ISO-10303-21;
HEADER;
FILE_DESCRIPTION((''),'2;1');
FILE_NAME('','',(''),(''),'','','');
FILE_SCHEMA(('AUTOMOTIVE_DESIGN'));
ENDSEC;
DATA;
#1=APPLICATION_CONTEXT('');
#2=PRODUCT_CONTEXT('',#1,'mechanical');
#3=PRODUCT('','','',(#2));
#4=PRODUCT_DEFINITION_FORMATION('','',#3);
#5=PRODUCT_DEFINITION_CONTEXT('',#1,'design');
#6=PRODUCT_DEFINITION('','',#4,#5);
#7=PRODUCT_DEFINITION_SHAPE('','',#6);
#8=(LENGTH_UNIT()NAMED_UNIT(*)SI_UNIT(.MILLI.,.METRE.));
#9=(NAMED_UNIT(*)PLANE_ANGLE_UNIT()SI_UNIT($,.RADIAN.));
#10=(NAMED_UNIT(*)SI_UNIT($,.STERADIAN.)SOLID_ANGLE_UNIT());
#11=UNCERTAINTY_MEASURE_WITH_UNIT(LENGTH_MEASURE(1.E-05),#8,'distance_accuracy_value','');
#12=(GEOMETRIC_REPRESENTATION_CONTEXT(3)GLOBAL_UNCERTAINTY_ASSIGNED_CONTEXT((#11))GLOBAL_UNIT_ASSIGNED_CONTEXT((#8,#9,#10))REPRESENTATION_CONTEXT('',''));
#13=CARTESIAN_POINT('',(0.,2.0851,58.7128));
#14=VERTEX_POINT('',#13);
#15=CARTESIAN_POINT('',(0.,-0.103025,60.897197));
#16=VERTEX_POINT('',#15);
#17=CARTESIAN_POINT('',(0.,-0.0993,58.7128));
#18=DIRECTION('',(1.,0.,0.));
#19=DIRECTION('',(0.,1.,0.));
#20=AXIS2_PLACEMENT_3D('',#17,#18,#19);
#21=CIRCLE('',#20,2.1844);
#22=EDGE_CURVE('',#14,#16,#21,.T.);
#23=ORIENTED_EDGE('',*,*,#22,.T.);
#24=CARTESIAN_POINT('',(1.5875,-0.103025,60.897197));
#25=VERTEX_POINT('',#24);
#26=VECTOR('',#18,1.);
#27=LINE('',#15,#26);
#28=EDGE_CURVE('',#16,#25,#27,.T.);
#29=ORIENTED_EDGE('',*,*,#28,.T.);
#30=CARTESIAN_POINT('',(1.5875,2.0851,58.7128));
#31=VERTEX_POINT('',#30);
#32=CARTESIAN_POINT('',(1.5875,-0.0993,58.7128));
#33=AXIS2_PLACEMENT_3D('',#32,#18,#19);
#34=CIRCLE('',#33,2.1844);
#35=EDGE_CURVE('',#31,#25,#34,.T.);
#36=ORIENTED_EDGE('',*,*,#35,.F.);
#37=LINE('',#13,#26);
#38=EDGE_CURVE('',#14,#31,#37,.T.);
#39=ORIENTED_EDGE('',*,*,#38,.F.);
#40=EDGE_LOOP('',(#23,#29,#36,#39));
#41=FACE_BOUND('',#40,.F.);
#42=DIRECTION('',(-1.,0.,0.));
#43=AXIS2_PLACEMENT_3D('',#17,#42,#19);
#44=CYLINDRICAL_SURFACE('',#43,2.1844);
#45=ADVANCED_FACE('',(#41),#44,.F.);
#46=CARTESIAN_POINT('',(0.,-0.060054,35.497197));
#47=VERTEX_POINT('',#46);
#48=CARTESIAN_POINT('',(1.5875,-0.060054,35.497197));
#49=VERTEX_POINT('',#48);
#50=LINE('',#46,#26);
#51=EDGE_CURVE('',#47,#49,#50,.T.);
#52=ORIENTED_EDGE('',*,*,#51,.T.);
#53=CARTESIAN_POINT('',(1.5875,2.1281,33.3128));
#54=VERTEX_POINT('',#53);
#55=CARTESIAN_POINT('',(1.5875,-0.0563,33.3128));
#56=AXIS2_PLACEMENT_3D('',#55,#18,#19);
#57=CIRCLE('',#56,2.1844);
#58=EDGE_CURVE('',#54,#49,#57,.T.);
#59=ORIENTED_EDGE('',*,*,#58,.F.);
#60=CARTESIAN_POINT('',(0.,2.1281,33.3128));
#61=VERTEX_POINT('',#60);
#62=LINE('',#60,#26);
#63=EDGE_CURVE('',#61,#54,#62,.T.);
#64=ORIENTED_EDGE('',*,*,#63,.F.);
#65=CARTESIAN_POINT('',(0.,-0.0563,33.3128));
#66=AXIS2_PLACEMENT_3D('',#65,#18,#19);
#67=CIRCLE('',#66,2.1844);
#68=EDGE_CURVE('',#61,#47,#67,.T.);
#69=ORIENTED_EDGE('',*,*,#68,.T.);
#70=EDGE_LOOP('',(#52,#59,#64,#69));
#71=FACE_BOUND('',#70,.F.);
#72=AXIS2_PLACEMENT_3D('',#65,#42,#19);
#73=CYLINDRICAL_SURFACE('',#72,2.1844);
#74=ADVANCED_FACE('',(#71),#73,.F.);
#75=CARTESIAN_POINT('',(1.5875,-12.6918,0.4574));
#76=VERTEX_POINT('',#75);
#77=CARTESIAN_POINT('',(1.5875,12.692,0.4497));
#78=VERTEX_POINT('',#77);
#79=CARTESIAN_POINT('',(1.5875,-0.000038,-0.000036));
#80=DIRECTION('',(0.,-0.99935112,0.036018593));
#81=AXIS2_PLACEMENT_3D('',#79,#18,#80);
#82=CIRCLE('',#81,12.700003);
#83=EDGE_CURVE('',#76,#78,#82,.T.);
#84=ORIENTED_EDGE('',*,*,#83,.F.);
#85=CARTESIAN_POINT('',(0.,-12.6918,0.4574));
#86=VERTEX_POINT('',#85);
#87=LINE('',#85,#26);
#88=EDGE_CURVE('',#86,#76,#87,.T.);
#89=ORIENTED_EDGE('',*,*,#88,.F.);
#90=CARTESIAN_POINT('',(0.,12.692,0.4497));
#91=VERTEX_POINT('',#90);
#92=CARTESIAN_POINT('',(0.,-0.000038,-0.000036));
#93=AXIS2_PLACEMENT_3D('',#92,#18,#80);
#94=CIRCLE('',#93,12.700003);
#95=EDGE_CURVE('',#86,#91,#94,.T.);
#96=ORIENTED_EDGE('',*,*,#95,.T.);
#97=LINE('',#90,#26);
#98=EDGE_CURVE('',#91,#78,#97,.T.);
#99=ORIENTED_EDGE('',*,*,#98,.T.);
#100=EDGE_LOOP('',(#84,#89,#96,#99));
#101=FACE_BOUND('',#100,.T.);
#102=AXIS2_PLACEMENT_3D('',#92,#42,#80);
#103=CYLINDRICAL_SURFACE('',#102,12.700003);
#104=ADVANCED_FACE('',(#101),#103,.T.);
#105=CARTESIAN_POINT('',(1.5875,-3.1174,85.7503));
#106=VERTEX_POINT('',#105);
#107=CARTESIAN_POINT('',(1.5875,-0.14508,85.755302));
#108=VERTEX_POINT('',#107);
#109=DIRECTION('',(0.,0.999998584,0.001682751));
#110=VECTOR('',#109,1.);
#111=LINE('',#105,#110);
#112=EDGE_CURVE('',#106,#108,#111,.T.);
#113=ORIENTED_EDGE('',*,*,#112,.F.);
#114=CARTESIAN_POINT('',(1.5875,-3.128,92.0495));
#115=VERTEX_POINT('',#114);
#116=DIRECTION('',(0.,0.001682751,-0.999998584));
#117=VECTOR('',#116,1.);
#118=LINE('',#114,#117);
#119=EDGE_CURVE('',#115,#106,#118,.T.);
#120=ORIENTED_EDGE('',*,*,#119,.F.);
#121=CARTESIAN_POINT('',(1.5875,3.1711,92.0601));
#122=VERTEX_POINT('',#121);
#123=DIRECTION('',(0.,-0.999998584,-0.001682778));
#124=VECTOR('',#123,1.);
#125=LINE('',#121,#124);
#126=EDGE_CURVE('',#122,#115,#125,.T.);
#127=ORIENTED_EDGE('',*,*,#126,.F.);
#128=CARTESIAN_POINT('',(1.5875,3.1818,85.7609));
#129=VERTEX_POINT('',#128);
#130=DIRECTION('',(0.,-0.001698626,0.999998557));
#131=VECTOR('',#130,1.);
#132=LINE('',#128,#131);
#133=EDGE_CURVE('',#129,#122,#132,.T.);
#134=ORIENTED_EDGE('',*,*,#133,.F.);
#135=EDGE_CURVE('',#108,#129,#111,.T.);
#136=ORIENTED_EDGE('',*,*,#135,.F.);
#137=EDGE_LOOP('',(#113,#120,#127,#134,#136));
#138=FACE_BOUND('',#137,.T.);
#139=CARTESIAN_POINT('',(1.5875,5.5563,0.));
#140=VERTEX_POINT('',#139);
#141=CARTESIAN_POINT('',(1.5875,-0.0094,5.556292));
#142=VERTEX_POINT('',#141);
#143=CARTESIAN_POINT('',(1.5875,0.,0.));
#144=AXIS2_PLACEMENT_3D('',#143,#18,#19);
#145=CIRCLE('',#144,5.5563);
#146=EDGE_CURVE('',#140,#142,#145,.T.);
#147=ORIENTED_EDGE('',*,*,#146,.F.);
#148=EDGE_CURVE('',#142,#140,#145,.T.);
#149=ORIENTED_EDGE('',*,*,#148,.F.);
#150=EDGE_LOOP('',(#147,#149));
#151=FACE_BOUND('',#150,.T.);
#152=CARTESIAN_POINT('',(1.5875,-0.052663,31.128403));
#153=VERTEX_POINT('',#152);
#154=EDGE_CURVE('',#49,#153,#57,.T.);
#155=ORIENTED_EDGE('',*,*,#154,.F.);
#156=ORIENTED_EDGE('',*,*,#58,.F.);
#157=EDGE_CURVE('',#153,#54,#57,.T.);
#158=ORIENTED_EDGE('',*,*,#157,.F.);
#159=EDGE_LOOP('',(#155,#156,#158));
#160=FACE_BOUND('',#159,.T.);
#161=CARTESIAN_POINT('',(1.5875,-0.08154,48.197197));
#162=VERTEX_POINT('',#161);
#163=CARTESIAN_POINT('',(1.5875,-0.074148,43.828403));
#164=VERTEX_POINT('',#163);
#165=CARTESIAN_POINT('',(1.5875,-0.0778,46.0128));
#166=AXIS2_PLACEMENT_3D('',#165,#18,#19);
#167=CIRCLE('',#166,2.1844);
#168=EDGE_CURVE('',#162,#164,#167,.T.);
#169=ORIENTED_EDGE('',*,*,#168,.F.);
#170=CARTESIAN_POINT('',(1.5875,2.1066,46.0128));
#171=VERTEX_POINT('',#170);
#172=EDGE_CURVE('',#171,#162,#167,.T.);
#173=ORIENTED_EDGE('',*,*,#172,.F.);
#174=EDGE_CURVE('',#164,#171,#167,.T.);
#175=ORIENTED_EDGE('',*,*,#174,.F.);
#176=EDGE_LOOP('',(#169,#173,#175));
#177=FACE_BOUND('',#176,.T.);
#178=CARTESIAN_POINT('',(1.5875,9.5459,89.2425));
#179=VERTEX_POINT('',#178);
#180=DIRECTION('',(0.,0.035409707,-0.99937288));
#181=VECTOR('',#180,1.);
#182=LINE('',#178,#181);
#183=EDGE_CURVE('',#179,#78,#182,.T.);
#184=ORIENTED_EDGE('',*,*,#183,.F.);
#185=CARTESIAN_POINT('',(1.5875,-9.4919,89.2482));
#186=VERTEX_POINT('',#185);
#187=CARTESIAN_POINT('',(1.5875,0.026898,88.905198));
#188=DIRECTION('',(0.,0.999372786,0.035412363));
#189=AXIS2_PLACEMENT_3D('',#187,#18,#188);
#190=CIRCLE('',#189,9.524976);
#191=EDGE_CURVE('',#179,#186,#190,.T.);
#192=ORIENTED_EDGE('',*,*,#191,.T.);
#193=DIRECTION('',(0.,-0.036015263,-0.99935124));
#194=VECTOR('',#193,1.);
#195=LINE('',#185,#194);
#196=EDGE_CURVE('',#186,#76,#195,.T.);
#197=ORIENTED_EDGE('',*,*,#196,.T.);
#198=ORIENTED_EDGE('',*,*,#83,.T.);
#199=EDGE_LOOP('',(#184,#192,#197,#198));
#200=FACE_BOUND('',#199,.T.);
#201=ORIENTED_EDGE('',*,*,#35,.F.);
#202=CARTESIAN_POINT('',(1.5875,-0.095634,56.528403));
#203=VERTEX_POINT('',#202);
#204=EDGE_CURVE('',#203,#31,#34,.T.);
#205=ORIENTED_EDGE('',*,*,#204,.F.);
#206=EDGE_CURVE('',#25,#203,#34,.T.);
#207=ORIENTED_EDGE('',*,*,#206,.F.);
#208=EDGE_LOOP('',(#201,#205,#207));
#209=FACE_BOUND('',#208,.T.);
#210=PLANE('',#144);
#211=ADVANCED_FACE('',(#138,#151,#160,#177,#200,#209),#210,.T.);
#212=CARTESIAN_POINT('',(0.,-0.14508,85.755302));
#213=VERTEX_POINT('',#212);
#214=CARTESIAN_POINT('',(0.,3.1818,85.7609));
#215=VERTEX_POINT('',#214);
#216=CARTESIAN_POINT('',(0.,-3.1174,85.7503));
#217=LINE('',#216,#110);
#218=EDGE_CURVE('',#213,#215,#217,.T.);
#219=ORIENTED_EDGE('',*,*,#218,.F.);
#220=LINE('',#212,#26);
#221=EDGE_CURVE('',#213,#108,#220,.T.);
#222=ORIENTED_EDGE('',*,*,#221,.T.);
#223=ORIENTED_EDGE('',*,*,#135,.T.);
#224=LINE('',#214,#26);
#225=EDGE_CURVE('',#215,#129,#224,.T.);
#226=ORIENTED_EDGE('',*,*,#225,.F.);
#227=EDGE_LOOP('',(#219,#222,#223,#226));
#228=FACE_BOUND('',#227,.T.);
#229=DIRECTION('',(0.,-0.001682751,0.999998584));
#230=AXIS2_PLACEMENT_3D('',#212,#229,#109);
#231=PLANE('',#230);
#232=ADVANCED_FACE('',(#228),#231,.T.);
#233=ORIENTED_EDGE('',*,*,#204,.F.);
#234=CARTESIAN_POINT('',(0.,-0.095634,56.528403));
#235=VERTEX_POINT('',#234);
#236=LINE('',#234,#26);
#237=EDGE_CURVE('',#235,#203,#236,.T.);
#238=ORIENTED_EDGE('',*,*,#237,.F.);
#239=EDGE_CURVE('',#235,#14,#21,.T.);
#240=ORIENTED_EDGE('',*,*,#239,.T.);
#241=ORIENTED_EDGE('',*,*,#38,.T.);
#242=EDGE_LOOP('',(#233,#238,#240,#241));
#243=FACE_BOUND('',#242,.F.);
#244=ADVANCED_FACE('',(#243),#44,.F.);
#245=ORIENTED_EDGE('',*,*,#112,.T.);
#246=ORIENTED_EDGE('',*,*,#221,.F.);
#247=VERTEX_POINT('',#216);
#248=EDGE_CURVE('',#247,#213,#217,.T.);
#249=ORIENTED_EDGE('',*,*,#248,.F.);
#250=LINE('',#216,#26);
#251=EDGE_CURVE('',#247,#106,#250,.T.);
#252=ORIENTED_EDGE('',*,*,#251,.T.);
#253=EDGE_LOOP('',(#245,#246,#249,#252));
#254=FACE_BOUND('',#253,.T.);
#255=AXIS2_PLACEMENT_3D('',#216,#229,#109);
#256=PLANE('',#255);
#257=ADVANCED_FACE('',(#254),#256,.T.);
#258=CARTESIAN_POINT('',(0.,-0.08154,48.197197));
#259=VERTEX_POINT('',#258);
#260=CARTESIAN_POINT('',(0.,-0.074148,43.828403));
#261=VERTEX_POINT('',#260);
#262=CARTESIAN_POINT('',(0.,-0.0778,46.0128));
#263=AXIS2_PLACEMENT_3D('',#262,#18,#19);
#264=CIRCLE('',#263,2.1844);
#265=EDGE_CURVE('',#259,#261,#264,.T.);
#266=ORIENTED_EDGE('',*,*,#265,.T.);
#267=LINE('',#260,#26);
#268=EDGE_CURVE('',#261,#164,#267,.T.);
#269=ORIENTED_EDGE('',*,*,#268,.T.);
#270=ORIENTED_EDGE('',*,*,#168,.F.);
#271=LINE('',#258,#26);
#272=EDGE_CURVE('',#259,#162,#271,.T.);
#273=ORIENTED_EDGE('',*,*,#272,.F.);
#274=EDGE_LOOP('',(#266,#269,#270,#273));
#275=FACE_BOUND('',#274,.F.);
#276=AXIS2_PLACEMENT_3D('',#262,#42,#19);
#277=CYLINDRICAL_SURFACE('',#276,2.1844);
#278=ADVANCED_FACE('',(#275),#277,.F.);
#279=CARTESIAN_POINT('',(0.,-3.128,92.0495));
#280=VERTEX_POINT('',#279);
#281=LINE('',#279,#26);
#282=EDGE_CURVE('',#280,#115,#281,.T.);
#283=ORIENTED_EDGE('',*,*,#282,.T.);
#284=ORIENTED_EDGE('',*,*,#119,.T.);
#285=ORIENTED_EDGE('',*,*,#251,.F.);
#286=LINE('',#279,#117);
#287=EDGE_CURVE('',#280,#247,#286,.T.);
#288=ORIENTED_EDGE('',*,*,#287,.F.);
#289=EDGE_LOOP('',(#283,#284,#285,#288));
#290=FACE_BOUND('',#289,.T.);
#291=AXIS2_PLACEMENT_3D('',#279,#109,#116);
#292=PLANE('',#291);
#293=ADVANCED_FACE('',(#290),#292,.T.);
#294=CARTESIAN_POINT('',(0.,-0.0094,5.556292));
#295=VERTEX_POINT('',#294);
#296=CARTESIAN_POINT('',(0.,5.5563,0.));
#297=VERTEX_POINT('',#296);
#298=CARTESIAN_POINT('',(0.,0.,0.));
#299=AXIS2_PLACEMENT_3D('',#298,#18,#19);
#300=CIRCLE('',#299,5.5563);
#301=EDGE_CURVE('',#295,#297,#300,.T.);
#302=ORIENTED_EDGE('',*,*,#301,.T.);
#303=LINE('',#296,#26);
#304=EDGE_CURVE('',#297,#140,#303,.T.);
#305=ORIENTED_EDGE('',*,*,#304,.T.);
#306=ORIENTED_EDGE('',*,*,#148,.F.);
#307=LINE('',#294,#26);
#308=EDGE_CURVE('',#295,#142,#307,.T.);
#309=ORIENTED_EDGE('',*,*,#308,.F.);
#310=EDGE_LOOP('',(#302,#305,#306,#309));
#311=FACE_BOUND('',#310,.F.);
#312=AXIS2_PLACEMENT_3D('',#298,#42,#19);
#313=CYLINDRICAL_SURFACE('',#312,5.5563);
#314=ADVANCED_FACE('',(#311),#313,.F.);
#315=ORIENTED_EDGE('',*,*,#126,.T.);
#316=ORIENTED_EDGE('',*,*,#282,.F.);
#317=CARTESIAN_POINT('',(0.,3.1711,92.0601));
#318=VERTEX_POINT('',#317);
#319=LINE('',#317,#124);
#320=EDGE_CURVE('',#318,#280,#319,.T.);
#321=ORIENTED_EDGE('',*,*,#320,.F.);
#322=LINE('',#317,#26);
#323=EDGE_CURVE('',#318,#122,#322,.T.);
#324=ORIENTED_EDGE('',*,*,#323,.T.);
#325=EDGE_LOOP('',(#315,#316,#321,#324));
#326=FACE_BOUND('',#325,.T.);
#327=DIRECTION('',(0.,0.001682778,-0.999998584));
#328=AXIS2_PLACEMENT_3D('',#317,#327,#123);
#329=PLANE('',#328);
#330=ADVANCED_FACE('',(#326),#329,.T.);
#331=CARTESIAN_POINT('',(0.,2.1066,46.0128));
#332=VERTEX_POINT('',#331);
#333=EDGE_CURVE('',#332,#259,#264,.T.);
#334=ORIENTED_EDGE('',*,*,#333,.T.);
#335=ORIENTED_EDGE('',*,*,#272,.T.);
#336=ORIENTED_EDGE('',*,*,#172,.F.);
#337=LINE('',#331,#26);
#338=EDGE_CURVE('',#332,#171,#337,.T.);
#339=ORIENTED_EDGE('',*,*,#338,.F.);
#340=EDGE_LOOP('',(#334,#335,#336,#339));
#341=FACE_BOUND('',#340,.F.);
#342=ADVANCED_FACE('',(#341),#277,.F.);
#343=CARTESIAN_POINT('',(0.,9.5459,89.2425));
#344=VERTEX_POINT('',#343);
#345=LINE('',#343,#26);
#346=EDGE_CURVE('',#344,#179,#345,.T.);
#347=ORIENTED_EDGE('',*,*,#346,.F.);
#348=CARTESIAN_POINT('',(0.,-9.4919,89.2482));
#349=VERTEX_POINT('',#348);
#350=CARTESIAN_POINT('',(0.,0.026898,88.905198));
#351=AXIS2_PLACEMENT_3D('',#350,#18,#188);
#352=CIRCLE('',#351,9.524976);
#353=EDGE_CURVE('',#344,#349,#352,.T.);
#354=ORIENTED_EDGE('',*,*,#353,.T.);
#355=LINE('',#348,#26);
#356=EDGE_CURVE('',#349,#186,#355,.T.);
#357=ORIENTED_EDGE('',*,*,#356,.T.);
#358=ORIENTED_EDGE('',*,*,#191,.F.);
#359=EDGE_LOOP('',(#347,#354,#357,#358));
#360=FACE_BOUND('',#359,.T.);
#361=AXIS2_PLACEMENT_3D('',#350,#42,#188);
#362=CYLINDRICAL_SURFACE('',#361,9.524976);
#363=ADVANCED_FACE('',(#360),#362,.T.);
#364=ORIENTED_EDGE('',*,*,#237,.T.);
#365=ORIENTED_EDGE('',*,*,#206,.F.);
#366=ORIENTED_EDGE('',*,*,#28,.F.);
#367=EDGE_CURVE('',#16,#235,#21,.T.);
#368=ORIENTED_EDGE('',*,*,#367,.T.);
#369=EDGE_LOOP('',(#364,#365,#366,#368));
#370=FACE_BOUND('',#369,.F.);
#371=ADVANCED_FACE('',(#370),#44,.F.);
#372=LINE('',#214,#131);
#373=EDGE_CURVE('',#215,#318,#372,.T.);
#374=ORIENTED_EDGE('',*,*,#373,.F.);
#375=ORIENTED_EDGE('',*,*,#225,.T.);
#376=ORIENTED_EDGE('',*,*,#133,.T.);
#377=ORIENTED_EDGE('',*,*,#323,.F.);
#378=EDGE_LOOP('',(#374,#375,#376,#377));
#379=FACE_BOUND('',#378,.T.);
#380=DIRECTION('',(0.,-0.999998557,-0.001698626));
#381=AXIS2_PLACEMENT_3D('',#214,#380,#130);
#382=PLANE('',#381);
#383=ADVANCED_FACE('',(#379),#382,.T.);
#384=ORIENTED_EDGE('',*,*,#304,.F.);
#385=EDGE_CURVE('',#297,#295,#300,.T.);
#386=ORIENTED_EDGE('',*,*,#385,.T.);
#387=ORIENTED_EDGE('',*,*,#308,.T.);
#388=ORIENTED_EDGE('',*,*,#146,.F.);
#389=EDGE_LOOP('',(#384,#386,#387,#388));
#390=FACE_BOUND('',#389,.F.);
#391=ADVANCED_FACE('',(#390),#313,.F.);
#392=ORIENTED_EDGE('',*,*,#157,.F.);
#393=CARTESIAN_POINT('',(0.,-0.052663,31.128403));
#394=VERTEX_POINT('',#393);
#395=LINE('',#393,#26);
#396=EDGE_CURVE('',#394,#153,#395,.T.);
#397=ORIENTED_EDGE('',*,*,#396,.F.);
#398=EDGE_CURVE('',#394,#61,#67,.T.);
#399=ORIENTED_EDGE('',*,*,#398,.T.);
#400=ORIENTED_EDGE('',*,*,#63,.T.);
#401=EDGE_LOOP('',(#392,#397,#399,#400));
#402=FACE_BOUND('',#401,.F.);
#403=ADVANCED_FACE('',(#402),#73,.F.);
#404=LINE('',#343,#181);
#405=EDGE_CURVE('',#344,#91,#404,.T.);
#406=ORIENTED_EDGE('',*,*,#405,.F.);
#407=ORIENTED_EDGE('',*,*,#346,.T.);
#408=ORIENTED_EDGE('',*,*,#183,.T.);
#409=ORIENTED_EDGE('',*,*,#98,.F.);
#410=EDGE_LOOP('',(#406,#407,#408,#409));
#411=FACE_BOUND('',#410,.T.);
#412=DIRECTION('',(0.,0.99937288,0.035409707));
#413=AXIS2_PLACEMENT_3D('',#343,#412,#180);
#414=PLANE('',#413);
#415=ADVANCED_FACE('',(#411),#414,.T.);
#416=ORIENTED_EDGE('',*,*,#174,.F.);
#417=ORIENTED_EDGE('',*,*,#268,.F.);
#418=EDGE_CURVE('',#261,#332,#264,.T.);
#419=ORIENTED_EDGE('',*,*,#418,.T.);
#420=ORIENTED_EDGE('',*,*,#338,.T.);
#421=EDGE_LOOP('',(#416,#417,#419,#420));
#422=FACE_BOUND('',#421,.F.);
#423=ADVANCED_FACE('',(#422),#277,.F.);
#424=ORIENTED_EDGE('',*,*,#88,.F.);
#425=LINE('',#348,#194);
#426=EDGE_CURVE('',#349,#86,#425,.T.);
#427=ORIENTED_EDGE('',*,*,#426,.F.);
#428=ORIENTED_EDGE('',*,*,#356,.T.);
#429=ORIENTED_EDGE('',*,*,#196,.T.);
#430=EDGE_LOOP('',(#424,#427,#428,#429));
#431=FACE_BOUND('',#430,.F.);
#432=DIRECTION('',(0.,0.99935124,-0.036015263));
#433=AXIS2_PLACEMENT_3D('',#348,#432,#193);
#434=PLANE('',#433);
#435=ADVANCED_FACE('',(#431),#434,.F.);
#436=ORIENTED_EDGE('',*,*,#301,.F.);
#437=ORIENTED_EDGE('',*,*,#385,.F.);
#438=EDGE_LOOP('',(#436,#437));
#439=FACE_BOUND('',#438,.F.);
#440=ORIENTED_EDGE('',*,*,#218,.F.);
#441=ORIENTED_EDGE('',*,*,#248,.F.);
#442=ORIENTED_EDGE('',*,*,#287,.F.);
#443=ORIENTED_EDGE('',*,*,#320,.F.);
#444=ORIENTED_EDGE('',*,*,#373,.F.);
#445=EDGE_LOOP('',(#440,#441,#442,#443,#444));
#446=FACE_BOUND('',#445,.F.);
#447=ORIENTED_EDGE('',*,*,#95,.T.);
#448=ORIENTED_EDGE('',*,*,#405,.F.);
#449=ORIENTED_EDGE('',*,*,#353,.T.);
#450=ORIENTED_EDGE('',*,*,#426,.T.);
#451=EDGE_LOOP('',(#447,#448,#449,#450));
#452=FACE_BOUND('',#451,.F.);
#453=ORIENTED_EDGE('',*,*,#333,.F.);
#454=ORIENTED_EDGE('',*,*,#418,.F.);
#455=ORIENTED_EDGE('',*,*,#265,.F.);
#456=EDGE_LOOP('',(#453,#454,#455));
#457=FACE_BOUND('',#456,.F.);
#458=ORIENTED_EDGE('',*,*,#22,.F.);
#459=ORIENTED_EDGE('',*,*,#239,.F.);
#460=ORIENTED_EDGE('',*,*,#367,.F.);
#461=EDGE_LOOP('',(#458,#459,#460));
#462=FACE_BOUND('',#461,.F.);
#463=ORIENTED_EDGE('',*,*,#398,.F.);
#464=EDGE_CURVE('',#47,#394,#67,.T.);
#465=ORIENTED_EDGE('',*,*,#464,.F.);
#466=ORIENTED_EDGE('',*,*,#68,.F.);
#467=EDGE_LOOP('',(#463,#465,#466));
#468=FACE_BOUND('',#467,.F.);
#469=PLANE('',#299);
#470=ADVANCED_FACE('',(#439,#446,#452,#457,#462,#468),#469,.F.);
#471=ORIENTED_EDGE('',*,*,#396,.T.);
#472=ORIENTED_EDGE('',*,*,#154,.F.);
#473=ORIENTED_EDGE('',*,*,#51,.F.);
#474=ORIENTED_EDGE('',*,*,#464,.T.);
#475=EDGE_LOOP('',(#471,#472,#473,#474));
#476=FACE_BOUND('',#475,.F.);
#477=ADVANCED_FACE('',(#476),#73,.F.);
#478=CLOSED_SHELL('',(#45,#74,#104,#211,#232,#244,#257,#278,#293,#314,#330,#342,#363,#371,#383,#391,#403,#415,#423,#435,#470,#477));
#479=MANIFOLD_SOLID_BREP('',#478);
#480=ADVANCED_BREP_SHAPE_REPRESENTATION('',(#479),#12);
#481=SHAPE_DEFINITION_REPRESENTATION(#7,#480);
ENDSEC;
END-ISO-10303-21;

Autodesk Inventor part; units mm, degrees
ref_plane "YZ Plane" through (0, 0, 0) normal (1, 0, 0) x (0, 1, 0)
ref_plane "XZ Plane" through (0, 0, 0) normal (0, 1, 0) x (-1, 0, 0)
ref_plane "XY Plane" through (0, 0, 0) normal (0, 0, 1) x (1, 0, 0)
sketch "main" plane through (0, 0, 0) normal (0, 0, 1) x (1, 0, 0)
  line L0 (46.0129, -12.1958) -> (-42.8871, -12.1958)
  circle A0 centre (46.0129, -12.1958) radius 5.5563
  arc A1 (45.534, -24.8867) -> (45.5846, 0.497) centre (46.0129, -12.1958) ccw
  line L1 (-46.0418, -15.1681) -> (-39.7426, -15.1681)
  line L2 (-39.7426, -15.1681) -> (-39.7426, -8.8689)
  line L3 (-39.7426, -8.8689) -> (-46.0418, -8.8689)
  line L4 (-46.0418, -8.8689) -> (-46.0418, -15.1681)
  line L5 (-46.0418, -15.1681) -> (-39.7426, -8.8689) construction
  line L6 (-39.7426, -15.1681) -> (-46.0418, -8.8689) construction
  arc A2 (-43.2133, -2.4989) -> (-43.2513, -21.5368) centre (-42.8922, -12.0185) ccw
  line L7 (-43.2133, -2.4989) -> (45.5846, 0.497)
  line L8 (-43.2513, -21.5368) -> (45.534, -24.8867)
  circle A3 centre (12.7, -12.1958) radius 2.1844
  circle A4 centre (0, -12.1958) radius 2.1844
  circle A5 centre (-12.7, -12.1958) radius 2.1844
  point P0 (-14.9546, -14.9924)
  point P1 (-63.2594, -31.7725)
  point P2 (-42.8922, -12.0185)
  dimension "d0" = 88.9
  dimension "d2" = 11.1125
  dimension "d3" = 25.4
  dimension "d4" = 6.2992
  dimension "d5" = 6.2992
  dimension "d6" = 19.05
  dimension "d9" = 4.3688
  dimension "d12" = 12.7
sketch "Sketch1" plane through (0, 0, 0) normal (1, 0, 0) x (0, 1, 0)
  line L0 (0, 0) -> (-0.1504, 88.8999)
  circle A0 centre (0, 0) radius 5.5563
  arc A1 (-12.6918, 0.4574) -> (12.692, 0.4497) centre (0, 0) ccw
  line L1 (-3.128, 92.0495) -> (-3.1174, 85.7503)
  line L2 (-3.1174, 85.7503) -> (3.1818, 85.7609)
  line L3 (3.1818, 85.7609) -> (3.1711, 92.0601)
  line L4 (3.1711, 92.0601) -> (-3.128, 92.0495)
  line L5 (-3.128, 92.0495) -> (3.1818, 85.7609) construction
  line L6 (-3.1174, 85.7503) -> (3.1711, 92.0601) construction
  arc A2 (9.5459, 89.2425) -> (-9.4919, 89.2482) centre (0.0269, 88.9052) ccw
  line L7 (9.5459, 89.2425) -> (12.692, 0.4497)
  line L8 (-9.4919, 89.2482) -> (-12.6918, 0.4574)
  circle A3 centre (-0.0563, 33.3128) radius 2.1844
  circle A4 centre (-0.0778, 46.0128) radius 2.1844
  circle A5 centre (-0.0993, 58.7128) radius 2.1844
  point P0 (0, 0)
extrude "Extrusion1" add sketch "Sketch1" along normal blind 1.5875
properties part number "Gusset" material "Acetal Resin, White"
